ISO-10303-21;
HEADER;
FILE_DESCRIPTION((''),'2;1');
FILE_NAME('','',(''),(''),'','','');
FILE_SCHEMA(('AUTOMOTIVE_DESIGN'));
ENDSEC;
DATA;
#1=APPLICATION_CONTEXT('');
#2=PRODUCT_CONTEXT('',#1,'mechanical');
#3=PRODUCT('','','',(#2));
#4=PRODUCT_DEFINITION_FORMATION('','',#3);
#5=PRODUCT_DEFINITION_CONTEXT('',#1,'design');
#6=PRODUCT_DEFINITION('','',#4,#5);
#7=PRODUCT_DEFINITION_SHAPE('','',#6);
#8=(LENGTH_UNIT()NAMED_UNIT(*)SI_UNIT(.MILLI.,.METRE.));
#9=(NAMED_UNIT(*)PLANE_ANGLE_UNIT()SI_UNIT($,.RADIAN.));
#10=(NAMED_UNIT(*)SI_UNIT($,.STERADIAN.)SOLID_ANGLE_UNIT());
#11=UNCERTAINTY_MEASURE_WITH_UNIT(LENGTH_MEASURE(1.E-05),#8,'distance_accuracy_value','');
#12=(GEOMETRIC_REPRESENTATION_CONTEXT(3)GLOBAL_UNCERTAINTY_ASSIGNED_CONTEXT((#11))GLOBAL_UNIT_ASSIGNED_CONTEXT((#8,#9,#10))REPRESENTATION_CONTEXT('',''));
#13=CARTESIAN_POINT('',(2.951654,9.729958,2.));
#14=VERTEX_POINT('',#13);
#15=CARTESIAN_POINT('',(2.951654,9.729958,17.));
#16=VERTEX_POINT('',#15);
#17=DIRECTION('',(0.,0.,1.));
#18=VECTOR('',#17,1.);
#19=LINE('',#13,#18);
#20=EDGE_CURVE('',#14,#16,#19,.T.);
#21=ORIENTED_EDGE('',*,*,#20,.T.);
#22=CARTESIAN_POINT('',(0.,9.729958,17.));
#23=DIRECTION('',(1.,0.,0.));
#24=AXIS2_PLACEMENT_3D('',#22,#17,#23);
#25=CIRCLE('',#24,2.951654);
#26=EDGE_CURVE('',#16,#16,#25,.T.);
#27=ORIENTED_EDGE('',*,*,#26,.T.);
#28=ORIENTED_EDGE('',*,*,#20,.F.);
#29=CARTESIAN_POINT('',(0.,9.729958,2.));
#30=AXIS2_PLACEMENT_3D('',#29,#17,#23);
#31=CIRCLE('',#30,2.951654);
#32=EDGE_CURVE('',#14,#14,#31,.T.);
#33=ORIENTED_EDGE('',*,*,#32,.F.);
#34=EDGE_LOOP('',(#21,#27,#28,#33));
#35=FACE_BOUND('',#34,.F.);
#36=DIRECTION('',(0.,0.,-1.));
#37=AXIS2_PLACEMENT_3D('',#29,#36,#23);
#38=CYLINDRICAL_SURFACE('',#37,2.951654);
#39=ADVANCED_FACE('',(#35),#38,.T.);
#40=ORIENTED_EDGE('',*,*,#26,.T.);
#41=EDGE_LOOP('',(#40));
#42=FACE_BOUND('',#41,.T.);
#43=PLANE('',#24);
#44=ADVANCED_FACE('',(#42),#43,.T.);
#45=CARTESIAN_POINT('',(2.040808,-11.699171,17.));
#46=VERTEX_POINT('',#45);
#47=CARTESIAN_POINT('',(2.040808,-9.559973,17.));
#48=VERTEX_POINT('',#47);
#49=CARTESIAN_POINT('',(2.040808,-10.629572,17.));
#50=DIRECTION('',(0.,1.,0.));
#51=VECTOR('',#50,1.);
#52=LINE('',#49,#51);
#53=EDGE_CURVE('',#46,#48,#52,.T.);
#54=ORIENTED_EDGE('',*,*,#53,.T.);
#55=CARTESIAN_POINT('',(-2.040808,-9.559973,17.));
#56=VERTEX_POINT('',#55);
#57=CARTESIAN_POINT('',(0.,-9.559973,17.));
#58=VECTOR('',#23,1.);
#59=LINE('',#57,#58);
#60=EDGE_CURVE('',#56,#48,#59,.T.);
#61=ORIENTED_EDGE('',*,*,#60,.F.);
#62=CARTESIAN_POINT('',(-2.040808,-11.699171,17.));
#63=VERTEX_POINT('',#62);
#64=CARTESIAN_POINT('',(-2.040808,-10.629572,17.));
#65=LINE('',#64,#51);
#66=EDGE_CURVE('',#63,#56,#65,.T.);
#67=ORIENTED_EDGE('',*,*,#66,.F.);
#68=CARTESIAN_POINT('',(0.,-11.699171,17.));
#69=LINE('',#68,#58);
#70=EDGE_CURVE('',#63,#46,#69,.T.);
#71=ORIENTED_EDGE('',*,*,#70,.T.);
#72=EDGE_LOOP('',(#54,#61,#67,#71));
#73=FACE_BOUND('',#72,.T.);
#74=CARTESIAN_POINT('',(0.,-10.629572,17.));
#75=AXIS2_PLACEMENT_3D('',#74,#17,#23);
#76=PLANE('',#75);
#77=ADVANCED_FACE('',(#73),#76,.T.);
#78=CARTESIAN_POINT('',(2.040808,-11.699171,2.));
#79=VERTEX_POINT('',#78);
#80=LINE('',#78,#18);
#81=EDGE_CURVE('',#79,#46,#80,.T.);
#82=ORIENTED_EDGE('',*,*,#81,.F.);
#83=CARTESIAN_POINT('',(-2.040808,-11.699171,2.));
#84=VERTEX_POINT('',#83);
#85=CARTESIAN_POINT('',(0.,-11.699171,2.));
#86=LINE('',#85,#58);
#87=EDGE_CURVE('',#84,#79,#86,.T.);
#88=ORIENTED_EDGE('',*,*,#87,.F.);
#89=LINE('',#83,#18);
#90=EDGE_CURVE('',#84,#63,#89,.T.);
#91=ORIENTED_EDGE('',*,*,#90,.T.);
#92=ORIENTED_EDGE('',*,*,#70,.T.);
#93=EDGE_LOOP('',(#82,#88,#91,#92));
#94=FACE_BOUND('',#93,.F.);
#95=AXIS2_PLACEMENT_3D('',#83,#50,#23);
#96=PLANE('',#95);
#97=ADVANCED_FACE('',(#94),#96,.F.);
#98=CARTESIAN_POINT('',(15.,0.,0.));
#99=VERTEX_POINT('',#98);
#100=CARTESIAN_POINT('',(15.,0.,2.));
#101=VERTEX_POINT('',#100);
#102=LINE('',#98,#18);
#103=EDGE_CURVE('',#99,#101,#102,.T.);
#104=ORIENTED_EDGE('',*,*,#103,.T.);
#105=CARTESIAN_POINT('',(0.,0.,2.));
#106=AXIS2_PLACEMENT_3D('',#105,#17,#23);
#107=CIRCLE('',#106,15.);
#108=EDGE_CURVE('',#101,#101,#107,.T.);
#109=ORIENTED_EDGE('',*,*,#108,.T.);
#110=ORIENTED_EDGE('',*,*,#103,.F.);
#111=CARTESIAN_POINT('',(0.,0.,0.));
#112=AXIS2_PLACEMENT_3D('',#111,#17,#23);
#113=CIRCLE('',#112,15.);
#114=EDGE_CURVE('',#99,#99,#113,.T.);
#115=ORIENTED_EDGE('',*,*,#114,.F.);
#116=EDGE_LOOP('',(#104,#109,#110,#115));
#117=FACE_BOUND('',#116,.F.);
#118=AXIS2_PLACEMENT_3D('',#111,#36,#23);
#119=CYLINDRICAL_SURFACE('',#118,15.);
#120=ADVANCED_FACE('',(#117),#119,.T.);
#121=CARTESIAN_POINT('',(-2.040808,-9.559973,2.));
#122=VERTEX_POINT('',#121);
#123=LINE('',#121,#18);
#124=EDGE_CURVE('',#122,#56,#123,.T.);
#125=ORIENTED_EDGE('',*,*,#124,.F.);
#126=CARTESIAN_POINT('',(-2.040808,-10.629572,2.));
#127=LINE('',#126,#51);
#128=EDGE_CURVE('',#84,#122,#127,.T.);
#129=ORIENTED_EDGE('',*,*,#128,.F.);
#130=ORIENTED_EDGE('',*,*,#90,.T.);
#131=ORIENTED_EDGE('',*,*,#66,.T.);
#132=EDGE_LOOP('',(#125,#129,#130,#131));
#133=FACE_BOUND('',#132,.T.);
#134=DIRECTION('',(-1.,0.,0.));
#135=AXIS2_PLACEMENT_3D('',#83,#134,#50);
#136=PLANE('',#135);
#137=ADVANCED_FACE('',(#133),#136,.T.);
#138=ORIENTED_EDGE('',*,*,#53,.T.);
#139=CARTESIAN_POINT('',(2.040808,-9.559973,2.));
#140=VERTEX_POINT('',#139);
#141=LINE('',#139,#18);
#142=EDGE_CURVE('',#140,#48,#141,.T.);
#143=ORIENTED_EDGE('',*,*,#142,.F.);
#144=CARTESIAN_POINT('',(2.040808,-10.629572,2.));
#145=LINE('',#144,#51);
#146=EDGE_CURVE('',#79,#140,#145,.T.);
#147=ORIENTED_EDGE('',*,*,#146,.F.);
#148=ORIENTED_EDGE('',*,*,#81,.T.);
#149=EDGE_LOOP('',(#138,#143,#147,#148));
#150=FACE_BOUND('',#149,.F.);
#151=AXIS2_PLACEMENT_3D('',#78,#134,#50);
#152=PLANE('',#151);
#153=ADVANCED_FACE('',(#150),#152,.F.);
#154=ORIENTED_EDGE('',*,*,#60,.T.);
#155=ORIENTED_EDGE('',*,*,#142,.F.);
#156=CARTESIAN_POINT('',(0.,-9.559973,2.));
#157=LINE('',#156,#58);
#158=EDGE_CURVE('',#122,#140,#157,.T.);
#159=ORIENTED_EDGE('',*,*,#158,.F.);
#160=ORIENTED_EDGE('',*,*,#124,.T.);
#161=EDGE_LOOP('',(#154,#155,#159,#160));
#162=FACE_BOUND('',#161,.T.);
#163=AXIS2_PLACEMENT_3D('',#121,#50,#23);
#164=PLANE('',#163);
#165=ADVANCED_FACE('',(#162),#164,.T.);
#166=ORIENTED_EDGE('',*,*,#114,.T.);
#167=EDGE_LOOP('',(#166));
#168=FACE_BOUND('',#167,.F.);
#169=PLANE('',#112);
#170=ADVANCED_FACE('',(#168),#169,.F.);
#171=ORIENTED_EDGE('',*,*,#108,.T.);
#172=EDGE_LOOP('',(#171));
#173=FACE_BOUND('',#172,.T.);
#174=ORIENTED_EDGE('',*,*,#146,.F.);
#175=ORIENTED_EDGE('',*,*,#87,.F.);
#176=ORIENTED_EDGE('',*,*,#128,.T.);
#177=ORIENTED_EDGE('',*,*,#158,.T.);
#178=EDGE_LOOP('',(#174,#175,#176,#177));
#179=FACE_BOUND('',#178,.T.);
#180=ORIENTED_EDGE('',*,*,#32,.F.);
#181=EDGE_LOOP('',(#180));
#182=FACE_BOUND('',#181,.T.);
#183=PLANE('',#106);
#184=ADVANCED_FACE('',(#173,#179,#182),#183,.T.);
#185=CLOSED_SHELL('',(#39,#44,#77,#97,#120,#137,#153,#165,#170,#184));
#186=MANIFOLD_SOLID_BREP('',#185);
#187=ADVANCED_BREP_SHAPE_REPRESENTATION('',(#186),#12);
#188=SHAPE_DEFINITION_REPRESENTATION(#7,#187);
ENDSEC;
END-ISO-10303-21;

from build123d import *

# Parameters (mm, degrees)
F0_R     = 15
F1_DEPTH = 2
F2_R     = 2.9516544706
F2_W     = 4.0816161782
F2_H     = 2.1391976625
F3_DEPTH = 15


# Not quite as in the source:
# - a feature names something its author has since deleted; it is built from what else it names


with BuildPart() as f1:
    # F0 (on Top) → F1 (new body)
    with BuildSketch(Plane.XY):
        Circle(F0_R)
    extrude(amount=F1_DEPTH)

    # F2 (on face) → F3 (join)
    with BuildSketch(Plane.XY.offset(2)):
        with Locations((0, 9.7299581394)):
            Circle(F2_R)
        with Locations((0, -10.6295719743)):
            Rectangle(F2_W, F2_H)
    extrude(amount=F3_DEPTH)


solid = f1.part
